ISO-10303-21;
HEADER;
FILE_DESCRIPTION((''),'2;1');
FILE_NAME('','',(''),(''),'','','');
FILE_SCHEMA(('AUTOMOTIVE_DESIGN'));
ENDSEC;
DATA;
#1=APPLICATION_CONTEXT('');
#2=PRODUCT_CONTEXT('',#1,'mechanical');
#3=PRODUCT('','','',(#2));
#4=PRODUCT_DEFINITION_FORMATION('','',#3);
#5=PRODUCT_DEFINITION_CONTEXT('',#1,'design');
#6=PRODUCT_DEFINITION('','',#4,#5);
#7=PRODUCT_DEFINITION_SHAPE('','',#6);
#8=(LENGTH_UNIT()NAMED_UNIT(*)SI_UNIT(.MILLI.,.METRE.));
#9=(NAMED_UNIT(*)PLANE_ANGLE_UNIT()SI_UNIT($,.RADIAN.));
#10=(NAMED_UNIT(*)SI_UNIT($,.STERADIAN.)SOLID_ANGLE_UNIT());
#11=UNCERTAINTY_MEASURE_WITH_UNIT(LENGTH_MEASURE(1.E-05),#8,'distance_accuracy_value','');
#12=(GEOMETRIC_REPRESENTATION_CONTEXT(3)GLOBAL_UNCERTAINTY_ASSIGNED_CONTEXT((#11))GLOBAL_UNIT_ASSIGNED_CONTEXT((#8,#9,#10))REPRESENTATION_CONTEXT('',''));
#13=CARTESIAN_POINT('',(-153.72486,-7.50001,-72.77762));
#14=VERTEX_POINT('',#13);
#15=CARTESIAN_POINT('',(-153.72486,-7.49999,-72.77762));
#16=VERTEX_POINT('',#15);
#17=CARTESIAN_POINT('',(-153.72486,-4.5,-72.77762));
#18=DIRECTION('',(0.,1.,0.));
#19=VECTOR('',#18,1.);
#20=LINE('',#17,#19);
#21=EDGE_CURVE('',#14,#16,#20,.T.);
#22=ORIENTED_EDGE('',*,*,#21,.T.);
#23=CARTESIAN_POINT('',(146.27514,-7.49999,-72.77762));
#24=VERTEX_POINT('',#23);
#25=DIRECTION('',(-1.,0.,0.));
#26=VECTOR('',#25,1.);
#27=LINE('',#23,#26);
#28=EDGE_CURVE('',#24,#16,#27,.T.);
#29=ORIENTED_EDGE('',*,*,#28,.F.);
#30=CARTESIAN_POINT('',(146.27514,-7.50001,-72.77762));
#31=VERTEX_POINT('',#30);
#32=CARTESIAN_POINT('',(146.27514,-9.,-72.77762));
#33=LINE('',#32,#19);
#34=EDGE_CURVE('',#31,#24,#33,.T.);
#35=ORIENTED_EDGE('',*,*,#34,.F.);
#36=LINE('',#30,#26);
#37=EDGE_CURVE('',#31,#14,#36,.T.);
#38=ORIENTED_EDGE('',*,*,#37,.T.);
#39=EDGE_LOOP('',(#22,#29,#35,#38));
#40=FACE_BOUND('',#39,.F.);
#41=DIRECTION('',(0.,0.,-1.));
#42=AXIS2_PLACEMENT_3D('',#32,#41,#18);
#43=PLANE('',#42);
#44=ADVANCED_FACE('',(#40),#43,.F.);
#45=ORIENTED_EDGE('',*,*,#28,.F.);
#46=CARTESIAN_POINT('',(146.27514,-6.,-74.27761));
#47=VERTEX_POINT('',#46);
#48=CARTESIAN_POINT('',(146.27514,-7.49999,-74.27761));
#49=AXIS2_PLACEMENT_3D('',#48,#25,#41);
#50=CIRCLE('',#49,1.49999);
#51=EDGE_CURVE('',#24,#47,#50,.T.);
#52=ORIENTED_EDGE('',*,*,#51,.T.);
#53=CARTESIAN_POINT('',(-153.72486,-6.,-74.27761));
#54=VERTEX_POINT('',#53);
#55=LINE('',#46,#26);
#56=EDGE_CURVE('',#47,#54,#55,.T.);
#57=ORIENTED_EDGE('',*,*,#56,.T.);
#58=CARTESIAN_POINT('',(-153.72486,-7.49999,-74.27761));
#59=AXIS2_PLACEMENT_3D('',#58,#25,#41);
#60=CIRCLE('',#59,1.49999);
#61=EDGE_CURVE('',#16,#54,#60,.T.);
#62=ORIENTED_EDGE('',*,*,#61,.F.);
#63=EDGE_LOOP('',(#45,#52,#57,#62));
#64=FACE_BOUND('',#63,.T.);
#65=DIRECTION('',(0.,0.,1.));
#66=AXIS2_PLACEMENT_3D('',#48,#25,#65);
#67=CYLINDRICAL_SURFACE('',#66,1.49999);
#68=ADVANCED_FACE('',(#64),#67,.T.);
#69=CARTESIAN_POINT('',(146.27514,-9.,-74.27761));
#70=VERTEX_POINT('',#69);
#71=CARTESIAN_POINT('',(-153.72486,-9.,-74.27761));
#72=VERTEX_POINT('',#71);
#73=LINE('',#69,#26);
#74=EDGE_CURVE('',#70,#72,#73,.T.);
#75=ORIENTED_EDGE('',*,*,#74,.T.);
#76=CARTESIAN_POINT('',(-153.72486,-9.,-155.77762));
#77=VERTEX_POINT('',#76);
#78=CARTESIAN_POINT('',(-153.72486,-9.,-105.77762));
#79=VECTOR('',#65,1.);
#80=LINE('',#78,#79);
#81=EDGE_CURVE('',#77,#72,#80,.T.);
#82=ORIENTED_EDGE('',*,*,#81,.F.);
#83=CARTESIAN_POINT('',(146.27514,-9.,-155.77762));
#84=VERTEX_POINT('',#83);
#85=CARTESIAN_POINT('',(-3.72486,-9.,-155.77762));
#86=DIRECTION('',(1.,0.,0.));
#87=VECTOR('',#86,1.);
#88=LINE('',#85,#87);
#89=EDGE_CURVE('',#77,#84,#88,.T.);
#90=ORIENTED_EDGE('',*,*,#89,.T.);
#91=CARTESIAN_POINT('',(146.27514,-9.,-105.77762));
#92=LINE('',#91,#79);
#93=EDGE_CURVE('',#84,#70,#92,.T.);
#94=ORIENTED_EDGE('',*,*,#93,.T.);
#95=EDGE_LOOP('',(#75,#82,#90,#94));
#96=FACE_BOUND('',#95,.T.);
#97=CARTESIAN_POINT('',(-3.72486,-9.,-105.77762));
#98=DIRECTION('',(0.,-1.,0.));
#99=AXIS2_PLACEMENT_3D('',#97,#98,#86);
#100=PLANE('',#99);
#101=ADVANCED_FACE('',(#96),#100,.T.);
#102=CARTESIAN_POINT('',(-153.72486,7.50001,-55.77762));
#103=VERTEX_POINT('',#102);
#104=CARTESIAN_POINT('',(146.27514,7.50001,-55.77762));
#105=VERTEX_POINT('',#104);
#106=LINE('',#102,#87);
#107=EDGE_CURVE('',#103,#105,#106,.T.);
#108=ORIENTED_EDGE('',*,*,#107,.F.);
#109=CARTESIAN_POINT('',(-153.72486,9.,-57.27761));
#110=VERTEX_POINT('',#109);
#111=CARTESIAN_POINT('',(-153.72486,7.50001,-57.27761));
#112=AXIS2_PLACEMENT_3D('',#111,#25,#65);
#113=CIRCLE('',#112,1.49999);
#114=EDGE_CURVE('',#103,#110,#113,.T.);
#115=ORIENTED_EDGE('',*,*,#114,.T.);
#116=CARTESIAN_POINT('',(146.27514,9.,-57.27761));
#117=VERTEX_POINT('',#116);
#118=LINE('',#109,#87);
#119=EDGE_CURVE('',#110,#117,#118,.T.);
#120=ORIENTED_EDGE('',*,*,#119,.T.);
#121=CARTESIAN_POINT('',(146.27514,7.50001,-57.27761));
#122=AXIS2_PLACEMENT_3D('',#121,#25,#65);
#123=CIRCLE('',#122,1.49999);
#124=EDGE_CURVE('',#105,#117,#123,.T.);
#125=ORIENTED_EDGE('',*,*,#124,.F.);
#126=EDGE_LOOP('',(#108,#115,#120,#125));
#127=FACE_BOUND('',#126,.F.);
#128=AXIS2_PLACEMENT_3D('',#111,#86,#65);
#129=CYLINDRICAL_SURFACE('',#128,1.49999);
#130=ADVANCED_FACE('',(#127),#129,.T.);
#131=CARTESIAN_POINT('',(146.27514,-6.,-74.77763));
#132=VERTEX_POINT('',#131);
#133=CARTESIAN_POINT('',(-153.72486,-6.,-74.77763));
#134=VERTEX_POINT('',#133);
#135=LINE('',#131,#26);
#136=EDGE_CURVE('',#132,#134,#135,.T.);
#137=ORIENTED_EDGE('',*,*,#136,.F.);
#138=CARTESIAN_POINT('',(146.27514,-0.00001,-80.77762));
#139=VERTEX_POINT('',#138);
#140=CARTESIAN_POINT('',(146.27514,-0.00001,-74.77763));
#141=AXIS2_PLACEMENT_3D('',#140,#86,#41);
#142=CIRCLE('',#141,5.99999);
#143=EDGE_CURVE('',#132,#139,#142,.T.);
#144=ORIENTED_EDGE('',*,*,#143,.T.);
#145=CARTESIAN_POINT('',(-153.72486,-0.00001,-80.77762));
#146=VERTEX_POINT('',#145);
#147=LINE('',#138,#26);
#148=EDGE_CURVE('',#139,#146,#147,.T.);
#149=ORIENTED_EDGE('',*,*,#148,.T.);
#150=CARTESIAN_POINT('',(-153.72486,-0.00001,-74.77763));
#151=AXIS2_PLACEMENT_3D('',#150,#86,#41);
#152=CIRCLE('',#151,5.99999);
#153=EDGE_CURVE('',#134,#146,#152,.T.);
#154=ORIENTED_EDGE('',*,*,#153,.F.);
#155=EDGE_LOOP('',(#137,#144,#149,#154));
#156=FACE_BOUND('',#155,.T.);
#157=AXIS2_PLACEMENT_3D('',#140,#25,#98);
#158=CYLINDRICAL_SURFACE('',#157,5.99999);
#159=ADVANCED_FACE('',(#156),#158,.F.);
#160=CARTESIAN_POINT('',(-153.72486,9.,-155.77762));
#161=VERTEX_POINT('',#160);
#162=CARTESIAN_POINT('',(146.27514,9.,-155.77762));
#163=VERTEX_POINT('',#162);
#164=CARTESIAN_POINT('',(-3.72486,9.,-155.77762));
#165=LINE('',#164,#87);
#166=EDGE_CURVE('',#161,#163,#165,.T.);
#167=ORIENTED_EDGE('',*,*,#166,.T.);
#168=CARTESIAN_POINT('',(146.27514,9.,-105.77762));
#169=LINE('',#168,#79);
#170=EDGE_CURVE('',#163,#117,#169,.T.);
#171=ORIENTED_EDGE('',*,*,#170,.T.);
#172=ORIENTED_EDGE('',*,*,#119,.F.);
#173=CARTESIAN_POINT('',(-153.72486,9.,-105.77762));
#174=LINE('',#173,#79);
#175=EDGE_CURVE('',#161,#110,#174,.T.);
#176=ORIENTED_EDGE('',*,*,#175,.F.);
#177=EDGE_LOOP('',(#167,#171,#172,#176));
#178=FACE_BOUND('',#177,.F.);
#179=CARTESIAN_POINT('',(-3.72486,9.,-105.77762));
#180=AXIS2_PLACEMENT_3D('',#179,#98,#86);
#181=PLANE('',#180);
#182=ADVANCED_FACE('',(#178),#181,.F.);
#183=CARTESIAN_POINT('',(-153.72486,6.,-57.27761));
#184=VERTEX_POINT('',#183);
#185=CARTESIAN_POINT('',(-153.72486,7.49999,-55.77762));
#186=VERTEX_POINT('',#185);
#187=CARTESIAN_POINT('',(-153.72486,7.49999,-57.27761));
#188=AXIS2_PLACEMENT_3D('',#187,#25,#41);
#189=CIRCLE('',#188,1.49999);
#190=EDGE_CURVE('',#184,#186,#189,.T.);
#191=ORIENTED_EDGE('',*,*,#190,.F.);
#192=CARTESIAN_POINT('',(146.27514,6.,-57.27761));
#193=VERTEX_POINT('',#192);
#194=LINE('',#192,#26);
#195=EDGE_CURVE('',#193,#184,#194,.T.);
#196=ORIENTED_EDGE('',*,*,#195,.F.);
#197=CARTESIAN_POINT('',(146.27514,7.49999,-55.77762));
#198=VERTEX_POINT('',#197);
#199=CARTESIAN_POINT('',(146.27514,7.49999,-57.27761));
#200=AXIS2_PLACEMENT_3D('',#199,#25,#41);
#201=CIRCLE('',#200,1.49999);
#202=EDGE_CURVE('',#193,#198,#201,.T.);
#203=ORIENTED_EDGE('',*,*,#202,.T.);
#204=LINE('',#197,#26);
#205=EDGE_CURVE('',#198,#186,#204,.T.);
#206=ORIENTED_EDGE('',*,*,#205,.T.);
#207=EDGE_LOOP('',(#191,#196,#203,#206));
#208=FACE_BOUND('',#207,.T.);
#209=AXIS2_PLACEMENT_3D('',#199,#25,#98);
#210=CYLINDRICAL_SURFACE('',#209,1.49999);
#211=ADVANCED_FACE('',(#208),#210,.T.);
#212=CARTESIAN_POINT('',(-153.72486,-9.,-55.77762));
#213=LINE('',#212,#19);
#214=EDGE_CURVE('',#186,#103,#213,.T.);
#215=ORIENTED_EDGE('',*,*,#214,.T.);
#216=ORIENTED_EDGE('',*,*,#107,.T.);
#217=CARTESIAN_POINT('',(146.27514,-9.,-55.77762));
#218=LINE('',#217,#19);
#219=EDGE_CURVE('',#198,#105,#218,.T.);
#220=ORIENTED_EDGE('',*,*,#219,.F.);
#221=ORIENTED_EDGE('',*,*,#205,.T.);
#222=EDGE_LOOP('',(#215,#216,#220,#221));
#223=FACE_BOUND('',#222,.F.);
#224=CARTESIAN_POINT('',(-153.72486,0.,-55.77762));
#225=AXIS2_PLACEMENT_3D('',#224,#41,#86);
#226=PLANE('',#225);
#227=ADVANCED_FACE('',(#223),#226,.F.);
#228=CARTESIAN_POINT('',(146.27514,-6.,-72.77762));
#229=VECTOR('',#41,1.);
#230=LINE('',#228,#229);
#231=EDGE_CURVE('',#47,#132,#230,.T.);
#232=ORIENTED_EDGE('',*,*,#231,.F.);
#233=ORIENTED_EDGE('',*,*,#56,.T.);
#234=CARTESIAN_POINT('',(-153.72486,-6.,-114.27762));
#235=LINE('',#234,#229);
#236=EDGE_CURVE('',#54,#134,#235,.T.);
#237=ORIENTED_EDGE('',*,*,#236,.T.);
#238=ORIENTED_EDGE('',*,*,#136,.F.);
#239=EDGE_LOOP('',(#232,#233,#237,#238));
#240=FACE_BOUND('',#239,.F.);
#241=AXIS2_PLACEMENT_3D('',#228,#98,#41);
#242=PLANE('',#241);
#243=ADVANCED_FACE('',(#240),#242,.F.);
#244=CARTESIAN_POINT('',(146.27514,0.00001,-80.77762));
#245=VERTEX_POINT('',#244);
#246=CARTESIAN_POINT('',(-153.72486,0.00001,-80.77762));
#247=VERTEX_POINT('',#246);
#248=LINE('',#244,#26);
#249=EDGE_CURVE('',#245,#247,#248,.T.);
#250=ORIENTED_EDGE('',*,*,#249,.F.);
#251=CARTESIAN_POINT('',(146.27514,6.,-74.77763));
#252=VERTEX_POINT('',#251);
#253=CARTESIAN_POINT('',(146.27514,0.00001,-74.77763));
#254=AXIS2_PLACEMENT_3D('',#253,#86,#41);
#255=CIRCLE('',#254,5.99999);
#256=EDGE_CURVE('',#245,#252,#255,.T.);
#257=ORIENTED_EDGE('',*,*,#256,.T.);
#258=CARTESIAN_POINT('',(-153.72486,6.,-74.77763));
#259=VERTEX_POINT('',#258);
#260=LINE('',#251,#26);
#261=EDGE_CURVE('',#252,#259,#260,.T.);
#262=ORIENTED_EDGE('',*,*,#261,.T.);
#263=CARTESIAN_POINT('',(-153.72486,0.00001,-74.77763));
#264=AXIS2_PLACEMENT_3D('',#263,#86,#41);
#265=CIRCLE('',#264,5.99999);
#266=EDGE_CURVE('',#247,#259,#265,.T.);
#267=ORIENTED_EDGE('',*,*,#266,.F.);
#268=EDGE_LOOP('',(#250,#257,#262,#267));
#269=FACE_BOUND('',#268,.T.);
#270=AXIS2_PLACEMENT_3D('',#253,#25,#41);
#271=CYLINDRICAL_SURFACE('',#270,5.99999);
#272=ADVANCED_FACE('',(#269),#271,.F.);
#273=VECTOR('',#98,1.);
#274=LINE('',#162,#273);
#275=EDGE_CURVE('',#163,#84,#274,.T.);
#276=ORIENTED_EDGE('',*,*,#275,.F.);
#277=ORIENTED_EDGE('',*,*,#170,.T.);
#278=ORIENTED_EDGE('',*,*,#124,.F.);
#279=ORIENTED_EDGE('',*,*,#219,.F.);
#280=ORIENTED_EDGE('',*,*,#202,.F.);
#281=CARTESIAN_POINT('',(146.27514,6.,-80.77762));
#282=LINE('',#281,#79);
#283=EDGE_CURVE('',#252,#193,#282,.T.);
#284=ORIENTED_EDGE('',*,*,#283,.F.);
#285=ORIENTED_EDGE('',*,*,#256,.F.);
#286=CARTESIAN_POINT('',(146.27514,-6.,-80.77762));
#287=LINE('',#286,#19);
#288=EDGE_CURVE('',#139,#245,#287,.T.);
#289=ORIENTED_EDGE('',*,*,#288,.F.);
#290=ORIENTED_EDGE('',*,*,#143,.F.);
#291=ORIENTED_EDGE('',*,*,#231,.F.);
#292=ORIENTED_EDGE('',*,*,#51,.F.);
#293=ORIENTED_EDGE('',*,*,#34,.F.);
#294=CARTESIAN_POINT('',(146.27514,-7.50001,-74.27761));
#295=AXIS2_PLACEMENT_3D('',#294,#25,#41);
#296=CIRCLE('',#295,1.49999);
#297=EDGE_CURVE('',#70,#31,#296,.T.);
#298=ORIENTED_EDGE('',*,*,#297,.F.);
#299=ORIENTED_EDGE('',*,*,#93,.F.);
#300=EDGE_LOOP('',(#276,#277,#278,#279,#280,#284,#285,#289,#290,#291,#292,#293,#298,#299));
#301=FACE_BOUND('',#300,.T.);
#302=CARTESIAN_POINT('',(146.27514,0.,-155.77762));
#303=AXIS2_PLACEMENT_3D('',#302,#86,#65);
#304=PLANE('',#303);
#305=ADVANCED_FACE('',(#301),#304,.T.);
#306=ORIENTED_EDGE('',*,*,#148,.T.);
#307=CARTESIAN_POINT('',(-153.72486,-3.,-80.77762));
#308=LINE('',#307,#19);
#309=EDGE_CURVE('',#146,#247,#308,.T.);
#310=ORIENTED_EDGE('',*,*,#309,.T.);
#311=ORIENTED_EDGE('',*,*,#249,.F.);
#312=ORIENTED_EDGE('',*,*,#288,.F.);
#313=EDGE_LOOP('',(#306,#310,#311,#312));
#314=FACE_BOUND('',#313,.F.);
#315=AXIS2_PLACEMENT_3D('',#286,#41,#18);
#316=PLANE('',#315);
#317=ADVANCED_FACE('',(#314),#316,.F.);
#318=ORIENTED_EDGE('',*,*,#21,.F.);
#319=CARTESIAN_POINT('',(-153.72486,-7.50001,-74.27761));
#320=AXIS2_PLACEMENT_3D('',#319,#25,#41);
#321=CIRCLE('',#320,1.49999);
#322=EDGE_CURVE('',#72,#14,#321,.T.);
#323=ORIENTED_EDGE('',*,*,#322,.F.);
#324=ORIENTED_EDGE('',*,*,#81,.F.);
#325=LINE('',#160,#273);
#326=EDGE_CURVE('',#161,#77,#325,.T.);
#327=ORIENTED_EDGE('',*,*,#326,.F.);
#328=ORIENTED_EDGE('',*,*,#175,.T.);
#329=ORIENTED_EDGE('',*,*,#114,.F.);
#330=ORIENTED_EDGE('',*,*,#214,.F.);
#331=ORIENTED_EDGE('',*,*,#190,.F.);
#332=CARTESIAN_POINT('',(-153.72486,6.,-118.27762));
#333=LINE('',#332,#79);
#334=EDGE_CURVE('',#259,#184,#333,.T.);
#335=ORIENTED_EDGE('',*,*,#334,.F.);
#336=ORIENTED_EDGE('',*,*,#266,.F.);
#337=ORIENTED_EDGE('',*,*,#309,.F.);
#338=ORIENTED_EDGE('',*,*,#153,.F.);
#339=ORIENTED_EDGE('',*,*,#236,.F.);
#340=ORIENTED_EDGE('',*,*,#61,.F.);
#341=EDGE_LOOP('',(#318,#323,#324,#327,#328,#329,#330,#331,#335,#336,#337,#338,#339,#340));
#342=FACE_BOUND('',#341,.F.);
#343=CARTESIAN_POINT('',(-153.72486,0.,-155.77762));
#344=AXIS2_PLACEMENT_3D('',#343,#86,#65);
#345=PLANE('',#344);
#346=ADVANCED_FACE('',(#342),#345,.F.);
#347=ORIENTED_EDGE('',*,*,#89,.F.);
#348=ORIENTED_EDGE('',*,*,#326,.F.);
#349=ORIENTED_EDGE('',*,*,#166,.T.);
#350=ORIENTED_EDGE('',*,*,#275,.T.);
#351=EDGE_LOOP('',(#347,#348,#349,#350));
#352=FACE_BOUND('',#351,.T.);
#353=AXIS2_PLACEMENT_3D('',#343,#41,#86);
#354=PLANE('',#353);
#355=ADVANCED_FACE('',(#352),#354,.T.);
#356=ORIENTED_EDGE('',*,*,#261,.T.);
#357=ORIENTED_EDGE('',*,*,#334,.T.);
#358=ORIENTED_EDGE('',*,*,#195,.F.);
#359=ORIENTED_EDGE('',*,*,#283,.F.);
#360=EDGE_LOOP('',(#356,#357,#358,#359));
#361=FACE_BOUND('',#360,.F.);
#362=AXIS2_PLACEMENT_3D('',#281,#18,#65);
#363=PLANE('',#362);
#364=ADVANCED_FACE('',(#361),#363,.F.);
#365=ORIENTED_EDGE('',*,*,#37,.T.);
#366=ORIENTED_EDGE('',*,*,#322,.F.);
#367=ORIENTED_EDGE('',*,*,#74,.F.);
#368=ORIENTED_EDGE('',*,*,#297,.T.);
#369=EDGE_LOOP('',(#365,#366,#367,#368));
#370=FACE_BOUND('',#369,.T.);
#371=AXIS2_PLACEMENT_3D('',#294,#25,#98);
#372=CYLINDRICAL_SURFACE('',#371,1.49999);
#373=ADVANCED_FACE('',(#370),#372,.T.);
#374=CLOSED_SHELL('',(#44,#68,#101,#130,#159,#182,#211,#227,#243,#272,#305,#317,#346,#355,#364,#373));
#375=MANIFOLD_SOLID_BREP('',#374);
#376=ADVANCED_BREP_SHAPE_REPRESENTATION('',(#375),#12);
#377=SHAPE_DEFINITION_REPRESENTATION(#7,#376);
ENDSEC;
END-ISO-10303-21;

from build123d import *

# Parameters (mm, degrees)
F0_W     = 300
F0_H     = 100
F1_DEPTH = 9
F3_DEPTH = 300.001
F4_R     = 1.49999
F5_R     = 5.99999


# Not quite as in the source:
# - a fillet or chamfer is up to 0.001 mm smaller than in the source, because OpenCascade refuses the exact size


with BuildPart() as f1:
    # F0 (on Front) → F1 (new body, symmetric)
    with BuildSketch(Plane.XZ):
        with Locations((-3.7248600274, -105.7776198197)):
            Rectangle(F0_W, F0_H)
    extrude(amount=F1_DEPTH, both=True)

    # F2 (on face) → F3 (cut, through all)
    with BuildSketch(Plane.YZ.offset(146.2751399726)):
        Polygon((6, -55.7776198197), (-9, -55.7776198197), (-9, -72.7776198197), (-6, -72.7776198197), (-6, -80.7776198197), (6, -80.7776198197), align=None)
    extrude(amount=-F3_DEPTH, mode=Mode.SUBTRACT)

    # F4 (radius 1.5 in the source; OpenCascade refuses exactly that, so slightly less here)
    f4_edges = [f1.edges().sort_by_distance(p)[0] for p in [
        (-3.72486, 6, -55.77762),
        (-3.72486, 9, -55.77762),
        (-3.72486, -9, -72.77762),
        (-3.72486, -6, -72.77762),
    ]]
    fillet(f4_edges, radius=F4_R)

    # F5 (radius 6 in the source; OpenCascade refuses exactly that, so slightly less here)
    f5_edges = [f1.edges().sort_by_distance(p)[0] for p in [
        (-3.72486, 6, -80.77762),
        (-3.72486, -6, -80.77762),
    ]]
    fillet(f5_edges, radius=F5_R)


solid = f1.part
